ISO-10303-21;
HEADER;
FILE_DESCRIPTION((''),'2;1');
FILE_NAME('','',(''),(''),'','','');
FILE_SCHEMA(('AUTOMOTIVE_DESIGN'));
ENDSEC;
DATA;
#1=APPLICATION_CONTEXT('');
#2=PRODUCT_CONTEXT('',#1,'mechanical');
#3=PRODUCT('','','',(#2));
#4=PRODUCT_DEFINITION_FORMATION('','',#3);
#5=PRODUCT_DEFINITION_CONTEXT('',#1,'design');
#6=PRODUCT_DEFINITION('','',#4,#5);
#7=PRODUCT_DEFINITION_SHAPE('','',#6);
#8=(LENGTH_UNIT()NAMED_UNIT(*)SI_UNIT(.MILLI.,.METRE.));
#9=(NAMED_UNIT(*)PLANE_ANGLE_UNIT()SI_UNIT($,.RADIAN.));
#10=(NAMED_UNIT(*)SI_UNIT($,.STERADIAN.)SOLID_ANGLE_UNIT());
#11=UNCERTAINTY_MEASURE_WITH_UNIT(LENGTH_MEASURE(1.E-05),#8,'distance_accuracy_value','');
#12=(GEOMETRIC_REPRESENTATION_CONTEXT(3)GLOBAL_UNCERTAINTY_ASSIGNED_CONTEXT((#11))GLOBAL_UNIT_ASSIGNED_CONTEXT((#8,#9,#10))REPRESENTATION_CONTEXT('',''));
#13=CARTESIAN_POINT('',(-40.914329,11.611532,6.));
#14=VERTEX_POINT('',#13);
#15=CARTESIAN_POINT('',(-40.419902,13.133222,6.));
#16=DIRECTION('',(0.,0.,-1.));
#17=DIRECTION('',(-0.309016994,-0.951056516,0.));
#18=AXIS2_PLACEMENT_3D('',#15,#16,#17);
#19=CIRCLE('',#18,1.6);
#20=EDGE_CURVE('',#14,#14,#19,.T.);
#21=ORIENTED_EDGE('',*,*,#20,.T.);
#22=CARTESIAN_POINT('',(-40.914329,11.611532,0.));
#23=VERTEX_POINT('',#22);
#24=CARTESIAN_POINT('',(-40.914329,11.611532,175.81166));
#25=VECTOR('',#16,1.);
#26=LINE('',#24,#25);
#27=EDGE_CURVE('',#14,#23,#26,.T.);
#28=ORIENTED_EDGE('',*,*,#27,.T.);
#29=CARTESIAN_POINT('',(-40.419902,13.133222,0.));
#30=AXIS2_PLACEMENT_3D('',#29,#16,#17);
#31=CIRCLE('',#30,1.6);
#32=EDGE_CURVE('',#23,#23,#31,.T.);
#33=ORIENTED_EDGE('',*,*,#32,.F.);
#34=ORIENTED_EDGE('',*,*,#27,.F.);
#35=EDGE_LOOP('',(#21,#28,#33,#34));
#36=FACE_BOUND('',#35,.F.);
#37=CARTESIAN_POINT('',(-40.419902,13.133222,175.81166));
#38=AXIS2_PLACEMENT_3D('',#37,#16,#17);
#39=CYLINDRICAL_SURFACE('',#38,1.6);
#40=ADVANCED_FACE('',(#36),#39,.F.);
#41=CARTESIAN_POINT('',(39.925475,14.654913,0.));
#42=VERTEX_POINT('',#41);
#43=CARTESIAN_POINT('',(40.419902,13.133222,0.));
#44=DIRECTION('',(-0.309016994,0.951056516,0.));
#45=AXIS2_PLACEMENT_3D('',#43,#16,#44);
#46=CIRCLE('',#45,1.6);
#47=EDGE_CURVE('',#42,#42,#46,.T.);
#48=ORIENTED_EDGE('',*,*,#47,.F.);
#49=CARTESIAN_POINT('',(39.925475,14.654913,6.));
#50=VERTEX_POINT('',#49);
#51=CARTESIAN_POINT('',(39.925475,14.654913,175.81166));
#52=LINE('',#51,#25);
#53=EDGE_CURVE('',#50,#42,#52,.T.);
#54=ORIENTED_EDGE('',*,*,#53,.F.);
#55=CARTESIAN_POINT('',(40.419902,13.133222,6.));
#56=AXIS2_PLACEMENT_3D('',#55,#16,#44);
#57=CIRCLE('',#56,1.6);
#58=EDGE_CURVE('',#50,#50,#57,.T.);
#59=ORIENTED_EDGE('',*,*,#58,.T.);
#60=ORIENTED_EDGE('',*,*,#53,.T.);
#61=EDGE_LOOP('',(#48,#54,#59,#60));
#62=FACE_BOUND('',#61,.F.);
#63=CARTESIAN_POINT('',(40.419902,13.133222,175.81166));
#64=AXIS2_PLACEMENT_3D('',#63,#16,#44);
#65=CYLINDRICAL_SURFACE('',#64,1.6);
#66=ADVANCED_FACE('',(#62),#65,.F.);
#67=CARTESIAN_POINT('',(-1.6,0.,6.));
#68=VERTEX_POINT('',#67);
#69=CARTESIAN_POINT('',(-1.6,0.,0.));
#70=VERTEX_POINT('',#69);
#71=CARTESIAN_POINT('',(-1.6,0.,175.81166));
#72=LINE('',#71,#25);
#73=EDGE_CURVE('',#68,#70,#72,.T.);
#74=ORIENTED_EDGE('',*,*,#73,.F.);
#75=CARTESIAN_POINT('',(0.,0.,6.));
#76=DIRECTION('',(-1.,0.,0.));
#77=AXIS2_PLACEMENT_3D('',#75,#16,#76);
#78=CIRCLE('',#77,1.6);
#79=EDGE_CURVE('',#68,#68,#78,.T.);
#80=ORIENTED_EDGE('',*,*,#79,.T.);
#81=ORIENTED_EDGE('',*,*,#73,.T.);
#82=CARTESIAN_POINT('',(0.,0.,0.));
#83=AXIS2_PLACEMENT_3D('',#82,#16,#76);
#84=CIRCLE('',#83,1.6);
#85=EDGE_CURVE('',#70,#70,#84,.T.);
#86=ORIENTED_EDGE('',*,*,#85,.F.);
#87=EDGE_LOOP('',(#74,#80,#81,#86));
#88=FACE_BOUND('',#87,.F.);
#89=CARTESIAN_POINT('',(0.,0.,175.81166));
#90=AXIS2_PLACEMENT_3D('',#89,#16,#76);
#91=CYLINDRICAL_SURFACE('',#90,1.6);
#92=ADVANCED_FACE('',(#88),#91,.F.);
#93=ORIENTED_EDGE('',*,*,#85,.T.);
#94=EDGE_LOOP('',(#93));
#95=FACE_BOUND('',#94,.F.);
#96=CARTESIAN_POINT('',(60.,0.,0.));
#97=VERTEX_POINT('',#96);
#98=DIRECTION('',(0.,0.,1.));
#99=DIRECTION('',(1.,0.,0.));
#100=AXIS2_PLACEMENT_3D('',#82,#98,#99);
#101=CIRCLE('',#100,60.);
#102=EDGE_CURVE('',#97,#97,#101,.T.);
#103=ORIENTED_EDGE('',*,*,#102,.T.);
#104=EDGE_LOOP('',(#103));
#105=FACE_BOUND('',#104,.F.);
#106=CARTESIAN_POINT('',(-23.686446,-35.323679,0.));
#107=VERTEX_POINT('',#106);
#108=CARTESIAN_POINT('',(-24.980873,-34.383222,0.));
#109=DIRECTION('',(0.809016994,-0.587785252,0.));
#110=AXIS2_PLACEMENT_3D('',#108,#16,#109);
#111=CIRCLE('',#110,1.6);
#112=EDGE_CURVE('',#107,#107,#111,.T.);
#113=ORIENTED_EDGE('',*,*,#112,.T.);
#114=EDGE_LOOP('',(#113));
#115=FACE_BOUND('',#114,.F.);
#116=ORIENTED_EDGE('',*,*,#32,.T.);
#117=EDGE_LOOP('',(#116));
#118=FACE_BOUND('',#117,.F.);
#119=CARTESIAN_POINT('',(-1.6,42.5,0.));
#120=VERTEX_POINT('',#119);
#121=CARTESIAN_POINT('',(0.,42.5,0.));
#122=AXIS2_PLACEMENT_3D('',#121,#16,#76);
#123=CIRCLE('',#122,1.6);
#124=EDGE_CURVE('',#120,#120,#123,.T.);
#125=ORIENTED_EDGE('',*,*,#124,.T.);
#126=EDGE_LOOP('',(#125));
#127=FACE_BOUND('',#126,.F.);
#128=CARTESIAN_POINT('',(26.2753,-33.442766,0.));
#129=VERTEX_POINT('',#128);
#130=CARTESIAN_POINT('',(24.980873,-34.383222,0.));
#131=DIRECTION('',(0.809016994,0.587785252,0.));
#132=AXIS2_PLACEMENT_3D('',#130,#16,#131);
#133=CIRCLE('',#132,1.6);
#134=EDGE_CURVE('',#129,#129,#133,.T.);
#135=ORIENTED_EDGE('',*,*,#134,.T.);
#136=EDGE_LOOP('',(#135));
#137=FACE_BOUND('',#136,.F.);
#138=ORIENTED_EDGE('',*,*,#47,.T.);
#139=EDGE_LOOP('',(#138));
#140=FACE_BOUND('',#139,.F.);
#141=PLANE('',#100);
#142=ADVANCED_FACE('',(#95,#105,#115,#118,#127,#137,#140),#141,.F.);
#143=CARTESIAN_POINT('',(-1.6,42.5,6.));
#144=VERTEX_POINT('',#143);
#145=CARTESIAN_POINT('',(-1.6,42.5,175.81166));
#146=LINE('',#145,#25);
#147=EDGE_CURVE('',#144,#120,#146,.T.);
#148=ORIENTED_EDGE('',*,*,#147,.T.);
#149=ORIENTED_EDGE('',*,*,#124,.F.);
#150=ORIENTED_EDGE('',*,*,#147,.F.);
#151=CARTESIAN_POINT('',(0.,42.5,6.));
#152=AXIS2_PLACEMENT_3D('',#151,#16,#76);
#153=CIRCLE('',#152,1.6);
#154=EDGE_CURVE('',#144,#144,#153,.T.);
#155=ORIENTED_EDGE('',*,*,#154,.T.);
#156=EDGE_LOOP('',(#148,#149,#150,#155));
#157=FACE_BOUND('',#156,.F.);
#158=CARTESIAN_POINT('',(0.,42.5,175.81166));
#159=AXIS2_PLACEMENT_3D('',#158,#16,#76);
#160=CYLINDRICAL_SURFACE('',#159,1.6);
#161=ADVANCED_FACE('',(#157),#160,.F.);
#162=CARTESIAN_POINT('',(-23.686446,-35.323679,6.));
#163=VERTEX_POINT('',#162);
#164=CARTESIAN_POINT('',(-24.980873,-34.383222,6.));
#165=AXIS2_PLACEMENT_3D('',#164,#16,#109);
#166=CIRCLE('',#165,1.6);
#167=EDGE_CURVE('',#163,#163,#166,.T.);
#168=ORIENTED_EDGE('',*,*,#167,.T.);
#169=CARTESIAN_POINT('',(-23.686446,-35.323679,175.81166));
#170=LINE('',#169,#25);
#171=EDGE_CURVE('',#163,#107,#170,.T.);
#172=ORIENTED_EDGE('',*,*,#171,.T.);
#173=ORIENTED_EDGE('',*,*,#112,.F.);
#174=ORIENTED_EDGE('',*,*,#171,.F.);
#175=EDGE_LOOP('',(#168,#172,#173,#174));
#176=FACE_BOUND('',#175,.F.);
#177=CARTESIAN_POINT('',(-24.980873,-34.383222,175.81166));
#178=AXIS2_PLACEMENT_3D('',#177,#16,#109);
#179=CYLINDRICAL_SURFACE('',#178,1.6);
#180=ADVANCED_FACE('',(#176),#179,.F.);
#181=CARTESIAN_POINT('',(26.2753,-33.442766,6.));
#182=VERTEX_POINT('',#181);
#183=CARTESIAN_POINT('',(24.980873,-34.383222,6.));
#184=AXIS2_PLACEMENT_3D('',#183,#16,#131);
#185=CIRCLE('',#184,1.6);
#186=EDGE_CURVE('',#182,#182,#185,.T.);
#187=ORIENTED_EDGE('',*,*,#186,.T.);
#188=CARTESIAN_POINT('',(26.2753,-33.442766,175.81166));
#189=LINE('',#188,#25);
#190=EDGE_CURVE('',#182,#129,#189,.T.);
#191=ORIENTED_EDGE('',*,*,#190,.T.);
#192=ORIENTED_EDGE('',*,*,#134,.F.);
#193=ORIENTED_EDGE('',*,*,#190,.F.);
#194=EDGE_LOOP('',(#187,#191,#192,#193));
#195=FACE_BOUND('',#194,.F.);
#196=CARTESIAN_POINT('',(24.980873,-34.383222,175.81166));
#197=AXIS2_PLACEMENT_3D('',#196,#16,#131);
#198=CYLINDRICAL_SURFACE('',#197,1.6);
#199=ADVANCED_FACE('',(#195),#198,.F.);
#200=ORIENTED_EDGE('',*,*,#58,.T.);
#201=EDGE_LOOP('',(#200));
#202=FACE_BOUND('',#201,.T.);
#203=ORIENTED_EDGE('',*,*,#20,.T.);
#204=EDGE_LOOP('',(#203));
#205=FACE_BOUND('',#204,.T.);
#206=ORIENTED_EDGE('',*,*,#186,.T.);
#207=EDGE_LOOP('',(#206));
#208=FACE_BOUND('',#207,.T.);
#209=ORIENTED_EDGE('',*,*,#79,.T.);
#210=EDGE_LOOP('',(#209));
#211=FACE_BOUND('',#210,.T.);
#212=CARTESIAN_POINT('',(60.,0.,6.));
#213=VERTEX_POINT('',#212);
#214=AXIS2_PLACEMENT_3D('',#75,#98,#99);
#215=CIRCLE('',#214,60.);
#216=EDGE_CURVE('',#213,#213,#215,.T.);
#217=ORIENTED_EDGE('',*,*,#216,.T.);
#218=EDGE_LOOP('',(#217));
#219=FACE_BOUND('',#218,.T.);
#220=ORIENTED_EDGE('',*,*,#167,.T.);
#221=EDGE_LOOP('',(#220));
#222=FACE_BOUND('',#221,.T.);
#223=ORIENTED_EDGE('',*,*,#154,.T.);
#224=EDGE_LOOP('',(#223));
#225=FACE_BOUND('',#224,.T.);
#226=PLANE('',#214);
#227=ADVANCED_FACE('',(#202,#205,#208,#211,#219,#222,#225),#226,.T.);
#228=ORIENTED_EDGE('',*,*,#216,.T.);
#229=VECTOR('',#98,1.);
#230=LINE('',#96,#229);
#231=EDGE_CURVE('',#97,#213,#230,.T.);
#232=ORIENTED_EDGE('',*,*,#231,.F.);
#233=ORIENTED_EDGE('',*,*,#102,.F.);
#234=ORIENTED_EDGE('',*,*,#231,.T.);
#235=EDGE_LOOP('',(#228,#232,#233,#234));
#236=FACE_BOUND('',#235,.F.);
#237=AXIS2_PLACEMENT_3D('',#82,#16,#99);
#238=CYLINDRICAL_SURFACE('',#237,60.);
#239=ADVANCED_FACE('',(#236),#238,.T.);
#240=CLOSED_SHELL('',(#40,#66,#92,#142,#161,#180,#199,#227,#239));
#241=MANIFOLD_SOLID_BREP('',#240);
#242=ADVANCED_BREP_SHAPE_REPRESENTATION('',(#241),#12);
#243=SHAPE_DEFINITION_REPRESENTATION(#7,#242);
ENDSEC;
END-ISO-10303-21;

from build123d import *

# Parameters (mm, degrees)
F0_R            = 60
F1_DEPTH        = 6
F3_D            = 3.2
F6_D            = 3.2
F6_COPIES_COUNT = 5


# Not quite as in the source:
# - a pattern or mirror of a feature is missing from the dataset's text; its kind, count and spacing are read off the source's solid


with BuildPart() as f1:
    # F0 (on Top) → F1 (new body)
    with BuildSketch(Plane.XY):
        Circle(F0_R)
    extrude(amount=F1_DEPTH)

    # F3 (through all)
    with Locations(Plane.XY.offset(6)):
        with Locations((0, 0)):
            Hole(F3_D / 2)

    # F6 (through all)
    with Locations(Plane.XY.offset(6)):
        with Locations((0, 42.5)):
            f6 = Hole(F6_D / 2)

    # F6_copies: F6 ×5 about axis
    f6_copies_axis = Axis((0, 0, 0), (0, 0, 1))
    for i in range(1, F6_COPIES_COUNT):
        add(f6.rotate(f6_copies_axis, i * 360 / F6_COPIES_COUNT), mode=Mode.SUBTRACT)


solid = f1.part
